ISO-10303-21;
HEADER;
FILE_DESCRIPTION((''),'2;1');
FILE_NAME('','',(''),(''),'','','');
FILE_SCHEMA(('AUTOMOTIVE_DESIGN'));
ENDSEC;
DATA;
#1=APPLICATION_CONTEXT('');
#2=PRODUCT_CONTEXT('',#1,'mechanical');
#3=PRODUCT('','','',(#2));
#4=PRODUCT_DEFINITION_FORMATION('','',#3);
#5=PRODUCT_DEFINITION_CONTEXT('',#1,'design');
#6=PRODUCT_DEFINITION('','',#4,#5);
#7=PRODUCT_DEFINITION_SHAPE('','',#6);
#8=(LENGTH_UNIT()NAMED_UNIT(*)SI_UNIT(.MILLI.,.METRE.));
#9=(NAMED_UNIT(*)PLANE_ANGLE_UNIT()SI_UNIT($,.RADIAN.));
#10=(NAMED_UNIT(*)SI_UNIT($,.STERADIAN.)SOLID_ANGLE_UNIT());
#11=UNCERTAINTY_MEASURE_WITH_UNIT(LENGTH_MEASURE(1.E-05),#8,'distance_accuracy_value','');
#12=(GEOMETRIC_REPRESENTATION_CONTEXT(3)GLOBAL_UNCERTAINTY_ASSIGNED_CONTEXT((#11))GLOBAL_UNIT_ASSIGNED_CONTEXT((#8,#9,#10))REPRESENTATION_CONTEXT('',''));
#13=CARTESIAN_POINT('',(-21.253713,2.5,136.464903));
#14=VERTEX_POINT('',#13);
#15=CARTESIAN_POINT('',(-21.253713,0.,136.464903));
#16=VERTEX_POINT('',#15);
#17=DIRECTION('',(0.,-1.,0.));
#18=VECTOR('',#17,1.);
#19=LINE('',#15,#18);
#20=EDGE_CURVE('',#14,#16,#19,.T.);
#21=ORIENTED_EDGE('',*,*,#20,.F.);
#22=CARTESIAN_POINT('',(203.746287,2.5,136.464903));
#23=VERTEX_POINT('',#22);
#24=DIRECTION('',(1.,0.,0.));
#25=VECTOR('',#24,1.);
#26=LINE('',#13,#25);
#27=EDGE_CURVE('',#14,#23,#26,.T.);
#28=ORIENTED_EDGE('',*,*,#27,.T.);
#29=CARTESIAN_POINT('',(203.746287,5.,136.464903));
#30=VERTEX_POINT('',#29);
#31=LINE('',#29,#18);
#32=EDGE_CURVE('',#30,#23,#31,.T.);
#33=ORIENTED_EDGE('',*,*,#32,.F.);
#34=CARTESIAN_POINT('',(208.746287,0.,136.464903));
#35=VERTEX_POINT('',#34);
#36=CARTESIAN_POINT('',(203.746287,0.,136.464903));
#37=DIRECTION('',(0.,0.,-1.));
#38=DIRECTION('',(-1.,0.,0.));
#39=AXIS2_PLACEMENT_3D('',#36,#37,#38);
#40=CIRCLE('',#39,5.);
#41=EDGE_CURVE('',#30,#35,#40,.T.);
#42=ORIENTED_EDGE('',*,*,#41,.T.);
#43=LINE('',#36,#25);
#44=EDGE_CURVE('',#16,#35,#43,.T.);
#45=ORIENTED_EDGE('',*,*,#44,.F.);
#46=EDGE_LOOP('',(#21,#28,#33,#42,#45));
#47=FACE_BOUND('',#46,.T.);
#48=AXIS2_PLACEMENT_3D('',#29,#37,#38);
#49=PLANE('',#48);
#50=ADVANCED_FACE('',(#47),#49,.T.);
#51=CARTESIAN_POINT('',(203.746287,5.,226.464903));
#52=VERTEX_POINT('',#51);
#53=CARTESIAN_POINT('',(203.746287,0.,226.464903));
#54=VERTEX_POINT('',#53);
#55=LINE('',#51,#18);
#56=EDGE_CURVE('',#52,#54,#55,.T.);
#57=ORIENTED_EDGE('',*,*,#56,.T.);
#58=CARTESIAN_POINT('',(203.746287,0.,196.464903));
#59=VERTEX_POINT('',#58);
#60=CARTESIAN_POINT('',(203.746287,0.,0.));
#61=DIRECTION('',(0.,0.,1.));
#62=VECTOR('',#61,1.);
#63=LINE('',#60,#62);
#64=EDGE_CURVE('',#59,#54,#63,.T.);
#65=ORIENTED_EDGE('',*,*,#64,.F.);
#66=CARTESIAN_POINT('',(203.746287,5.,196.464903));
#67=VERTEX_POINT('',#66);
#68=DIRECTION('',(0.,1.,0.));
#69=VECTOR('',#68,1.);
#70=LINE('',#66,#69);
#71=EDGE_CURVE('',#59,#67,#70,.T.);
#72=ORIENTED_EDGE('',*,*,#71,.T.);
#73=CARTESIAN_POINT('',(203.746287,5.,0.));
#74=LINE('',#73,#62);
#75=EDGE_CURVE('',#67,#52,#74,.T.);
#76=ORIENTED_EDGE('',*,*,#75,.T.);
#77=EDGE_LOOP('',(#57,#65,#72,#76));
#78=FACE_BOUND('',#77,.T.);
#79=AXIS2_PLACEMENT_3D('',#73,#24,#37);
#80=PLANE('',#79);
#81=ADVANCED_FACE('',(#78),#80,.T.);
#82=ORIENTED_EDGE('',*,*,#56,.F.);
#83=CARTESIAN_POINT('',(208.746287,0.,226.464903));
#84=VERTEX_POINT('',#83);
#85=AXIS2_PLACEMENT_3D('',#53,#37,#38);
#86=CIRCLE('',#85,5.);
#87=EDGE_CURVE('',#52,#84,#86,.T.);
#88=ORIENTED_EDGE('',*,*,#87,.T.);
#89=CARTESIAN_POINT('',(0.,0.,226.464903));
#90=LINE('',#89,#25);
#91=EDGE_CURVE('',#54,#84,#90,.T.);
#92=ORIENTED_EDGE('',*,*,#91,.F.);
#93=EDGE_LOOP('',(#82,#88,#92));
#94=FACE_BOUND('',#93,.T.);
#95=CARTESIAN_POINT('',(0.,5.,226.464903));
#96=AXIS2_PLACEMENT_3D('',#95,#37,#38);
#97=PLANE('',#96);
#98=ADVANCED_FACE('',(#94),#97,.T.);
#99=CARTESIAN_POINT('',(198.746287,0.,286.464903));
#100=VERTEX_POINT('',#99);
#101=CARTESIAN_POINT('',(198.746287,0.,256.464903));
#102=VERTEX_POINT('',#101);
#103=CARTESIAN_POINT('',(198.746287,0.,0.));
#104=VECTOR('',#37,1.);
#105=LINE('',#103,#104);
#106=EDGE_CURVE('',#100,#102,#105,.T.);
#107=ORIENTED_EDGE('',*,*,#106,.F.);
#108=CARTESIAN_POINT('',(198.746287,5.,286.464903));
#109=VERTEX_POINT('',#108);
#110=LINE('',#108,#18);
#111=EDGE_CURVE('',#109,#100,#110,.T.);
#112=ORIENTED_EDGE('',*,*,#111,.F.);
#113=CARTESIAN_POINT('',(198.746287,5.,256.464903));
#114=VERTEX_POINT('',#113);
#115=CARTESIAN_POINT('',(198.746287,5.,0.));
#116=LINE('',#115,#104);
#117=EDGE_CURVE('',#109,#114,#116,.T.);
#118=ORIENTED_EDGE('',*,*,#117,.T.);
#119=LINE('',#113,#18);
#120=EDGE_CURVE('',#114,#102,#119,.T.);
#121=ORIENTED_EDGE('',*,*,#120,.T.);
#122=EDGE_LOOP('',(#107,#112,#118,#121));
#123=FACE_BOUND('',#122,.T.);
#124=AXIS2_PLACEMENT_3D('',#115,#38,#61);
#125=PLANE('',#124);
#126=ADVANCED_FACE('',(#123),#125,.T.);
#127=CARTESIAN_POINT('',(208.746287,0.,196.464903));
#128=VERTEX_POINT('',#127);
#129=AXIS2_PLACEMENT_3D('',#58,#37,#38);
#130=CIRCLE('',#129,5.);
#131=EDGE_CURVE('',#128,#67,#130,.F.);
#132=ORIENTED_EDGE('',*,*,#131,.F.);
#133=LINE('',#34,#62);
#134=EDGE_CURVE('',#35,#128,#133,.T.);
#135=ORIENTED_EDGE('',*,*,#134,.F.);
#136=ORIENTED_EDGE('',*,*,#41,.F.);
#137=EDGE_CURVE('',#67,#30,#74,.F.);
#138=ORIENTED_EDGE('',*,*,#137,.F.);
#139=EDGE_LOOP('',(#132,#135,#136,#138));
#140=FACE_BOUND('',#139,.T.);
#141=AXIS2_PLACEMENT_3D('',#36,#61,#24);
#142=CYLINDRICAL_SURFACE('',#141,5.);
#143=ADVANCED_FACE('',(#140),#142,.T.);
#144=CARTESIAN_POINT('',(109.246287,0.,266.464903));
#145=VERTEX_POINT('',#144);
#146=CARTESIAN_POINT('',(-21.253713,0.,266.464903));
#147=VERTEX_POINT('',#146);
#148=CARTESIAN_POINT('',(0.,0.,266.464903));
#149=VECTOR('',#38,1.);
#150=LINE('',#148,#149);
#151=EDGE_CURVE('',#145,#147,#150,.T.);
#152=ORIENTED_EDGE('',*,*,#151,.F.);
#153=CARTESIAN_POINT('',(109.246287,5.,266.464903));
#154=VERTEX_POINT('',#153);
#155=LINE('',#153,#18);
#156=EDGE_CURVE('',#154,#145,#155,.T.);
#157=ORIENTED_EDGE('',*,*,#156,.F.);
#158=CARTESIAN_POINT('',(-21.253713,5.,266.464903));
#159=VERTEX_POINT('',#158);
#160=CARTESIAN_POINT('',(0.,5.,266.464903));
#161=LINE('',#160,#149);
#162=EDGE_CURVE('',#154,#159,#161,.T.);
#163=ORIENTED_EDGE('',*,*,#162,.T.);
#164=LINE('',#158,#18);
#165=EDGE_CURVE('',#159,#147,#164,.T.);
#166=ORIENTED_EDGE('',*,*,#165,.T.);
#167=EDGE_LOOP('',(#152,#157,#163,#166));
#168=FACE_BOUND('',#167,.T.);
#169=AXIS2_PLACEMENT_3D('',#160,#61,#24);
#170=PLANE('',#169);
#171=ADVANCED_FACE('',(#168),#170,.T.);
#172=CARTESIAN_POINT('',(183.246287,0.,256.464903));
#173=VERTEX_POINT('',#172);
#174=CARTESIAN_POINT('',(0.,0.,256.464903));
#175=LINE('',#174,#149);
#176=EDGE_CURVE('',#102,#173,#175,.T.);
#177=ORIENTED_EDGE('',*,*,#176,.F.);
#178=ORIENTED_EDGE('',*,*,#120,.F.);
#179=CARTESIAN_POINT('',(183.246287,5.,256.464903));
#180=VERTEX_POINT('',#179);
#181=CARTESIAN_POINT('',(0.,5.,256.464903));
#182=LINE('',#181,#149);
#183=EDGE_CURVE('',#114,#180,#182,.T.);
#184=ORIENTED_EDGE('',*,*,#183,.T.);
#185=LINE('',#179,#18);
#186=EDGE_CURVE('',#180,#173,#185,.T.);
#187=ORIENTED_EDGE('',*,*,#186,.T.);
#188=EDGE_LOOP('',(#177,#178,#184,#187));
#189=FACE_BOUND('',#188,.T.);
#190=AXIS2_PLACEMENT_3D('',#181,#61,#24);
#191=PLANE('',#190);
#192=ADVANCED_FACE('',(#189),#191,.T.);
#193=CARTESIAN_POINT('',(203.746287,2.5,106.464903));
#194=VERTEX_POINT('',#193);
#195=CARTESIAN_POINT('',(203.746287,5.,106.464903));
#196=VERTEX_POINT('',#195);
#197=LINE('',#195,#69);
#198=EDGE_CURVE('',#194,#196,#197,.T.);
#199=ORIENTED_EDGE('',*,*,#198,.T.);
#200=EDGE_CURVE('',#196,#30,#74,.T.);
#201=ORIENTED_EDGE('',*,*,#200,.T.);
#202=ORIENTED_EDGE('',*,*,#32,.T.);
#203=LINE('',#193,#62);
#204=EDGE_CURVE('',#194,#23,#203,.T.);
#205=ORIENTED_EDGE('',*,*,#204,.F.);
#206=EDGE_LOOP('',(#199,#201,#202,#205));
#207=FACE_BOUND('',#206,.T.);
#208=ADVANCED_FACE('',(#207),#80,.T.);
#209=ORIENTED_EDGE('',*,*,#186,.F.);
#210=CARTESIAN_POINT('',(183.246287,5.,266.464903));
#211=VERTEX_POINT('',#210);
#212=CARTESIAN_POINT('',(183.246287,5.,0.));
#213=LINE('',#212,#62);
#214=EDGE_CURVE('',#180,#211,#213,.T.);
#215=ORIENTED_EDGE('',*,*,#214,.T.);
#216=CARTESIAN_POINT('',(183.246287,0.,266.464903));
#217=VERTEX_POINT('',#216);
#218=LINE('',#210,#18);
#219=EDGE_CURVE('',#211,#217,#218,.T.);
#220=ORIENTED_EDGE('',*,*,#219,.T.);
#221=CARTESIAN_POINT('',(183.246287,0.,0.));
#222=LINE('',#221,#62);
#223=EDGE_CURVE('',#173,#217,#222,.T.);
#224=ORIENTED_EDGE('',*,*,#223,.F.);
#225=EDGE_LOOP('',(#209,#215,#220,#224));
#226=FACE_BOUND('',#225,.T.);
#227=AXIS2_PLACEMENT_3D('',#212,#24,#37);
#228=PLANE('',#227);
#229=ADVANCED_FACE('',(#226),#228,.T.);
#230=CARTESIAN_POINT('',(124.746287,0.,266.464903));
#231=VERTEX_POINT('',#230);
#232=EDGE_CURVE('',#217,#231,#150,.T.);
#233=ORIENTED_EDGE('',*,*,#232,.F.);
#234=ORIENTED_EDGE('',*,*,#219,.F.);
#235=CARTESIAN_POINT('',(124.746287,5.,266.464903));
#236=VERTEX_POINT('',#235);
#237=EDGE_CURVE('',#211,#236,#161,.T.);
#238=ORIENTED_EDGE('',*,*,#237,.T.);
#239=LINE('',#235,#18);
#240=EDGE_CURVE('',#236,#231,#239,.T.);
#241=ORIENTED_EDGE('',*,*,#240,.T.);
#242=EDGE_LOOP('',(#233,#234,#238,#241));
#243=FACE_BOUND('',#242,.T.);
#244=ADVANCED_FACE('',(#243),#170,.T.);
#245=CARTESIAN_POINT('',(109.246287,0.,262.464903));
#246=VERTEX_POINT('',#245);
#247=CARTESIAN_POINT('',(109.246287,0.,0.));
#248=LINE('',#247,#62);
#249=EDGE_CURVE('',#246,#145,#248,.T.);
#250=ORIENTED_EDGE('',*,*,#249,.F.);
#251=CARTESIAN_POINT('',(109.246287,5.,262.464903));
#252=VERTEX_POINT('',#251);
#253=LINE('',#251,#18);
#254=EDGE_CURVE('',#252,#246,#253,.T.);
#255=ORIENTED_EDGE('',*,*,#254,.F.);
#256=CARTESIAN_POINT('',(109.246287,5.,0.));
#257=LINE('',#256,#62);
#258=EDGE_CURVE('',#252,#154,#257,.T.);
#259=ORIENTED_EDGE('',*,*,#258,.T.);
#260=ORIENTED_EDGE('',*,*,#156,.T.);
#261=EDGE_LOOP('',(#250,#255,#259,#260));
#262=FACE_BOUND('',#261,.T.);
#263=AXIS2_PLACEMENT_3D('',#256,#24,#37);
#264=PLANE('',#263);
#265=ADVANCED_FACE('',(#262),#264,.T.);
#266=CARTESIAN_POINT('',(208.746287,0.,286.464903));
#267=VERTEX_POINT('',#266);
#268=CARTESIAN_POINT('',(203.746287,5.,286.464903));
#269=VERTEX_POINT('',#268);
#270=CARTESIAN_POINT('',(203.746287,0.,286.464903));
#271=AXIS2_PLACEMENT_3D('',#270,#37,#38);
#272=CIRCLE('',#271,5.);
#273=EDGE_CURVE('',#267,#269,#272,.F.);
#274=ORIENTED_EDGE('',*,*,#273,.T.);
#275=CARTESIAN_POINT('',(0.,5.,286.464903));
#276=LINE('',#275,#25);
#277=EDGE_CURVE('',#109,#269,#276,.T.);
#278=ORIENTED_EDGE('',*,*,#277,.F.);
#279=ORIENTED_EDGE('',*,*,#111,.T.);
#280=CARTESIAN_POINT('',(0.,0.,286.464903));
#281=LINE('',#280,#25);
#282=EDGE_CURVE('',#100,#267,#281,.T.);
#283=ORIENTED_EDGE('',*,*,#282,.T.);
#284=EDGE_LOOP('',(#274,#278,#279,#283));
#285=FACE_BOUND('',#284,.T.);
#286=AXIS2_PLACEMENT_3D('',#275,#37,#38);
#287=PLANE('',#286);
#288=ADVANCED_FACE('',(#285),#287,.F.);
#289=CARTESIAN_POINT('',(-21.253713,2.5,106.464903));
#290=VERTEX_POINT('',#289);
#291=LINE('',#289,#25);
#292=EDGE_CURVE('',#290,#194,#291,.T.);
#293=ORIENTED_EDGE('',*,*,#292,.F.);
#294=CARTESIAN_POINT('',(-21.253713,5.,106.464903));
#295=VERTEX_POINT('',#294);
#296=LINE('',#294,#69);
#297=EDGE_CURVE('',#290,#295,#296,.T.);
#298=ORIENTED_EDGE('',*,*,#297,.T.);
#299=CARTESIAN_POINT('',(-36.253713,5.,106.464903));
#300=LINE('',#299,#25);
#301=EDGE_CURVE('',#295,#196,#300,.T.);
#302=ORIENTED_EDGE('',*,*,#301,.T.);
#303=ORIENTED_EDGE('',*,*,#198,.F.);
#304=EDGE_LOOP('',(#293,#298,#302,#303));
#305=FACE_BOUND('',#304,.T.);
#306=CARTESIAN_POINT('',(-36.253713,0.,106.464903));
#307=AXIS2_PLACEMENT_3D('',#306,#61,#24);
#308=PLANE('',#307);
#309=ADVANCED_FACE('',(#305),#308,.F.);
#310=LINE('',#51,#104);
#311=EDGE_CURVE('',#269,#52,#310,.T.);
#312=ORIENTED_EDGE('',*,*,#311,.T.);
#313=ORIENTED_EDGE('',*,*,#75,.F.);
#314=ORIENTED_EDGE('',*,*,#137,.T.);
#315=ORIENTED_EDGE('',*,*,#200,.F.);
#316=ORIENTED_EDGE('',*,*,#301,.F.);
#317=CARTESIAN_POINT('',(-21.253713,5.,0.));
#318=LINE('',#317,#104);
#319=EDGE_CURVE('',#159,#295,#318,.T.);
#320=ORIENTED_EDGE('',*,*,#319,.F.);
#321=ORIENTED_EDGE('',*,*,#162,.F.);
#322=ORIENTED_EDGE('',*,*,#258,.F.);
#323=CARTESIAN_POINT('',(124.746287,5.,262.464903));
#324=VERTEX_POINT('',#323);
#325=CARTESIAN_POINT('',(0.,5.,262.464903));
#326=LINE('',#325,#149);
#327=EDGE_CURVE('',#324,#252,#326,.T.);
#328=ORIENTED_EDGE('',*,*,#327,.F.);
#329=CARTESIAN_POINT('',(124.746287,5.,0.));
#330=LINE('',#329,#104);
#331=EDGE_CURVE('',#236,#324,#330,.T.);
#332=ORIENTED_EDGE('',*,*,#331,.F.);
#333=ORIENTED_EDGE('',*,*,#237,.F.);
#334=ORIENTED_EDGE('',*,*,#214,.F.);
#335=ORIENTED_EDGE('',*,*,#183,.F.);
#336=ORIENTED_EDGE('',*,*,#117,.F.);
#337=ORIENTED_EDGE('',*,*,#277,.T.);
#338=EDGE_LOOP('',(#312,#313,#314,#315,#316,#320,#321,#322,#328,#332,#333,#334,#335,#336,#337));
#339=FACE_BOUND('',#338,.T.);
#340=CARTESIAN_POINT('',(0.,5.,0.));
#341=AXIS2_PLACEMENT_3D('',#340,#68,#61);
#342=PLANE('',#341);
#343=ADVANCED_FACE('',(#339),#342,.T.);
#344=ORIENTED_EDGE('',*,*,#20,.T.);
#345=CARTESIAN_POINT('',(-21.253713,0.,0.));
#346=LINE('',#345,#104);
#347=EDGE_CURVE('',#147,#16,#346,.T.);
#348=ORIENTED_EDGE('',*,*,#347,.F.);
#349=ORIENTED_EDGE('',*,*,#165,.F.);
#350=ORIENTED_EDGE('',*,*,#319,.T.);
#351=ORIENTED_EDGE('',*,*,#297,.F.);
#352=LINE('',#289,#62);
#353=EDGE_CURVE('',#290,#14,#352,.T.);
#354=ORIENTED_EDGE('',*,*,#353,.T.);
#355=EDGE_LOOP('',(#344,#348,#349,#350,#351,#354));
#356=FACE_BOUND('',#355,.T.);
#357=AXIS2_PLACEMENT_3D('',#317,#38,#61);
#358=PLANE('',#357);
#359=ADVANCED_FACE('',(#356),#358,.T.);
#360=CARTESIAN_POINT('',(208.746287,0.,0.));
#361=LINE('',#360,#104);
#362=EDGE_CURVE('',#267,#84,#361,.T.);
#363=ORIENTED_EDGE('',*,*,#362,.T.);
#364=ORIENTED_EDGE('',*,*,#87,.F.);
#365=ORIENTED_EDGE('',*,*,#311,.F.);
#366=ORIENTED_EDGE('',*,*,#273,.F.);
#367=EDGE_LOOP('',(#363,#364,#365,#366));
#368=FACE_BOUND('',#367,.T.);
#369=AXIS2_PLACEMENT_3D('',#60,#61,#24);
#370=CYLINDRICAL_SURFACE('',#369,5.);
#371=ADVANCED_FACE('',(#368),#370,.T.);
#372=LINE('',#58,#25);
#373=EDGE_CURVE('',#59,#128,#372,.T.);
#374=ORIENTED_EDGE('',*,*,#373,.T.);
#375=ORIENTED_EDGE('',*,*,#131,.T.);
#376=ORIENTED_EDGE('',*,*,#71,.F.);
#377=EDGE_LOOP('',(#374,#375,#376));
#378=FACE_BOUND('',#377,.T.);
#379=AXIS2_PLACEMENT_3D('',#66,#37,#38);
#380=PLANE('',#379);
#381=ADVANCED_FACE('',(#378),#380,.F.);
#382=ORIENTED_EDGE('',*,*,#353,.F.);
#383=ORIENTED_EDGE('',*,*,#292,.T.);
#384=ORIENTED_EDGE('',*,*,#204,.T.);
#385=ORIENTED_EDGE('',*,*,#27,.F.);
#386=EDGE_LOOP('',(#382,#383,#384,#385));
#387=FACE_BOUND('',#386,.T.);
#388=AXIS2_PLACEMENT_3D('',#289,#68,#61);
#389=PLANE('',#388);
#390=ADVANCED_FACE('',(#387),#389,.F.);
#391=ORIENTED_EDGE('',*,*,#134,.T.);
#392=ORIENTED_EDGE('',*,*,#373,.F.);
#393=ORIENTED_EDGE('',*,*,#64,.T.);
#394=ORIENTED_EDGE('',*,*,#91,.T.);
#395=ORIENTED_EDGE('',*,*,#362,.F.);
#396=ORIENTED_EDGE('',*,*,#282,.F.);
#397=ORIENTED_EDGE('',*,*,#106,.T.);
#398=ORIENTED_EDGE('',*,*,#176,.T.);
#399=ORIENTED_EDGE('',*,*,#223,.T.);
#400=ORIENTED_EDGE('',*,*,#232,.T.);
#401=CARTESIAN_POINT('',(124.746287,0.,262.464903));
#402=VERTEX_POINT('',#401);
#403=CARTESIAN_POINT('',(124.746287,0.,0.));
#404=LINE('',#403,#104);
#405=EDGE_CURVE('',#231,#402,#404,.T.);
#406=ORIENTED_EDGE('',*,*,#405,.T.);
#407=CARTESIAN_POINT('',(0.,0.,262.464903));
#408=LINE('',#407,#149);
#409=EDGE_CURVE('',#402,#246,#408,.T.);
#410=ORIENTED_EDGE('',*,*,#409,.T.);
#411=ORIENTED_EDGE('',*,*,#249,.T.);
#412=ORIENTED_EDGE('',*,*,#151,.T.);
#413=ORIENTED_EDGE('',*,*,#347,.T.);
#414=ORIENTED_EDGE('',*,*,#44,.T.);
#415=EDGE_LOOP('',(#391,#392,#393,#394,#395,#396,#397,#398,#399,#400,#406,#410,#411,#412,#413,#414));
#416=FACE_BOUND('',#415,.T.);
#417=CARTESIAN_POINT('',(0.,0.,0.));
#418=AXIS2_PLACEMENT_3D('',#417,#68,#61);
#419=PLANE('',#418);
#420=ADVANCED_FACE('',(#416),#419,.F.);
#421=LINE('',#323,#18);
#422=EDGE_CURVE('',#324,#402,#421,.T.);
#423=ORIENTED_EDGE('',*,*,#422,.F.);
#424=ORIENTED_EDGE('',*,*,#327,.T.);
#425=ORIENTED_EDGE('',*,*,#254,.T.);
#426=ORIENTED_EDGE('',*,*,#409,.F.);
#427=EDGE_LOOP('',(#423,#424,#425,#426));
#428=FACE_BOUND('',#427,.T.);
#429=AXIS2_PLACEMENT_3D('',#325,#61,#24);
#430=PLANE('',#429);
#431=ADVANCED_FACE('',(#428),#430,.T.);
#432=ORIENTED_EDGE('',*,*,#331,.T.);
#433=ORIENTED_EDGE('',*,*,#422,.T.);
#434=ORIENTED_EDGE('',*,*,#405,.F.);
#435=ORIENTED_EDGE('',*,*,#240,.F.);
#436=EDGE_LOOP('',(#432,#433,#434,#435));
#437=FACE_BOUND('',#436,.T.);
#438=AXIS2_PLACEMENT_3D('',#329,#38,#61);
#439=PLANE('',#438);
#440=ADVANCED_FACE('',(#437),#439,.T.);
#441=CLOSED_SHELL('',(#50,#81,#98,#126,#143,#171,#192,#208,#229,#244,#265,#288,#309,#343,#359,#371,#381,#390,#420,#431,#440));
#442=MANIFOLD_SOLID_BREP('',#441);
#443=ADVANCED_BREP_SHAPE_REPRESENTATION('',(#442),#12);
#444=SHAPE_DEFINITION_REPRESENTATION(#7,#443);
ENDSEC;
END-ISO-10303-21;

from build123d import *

# Parameters (mm, degrees)
SKETCH_1_W          = 5
SKETCH_1_H          = 60
SKETCH_1_W_2        = 30
SKETCH_1_H_2        = 5
SKETCH_1_W_3        = 15
EXTRUDE_1_DEPTH     = 5
FILLET_1_R          = 5
SKETCH_2_W          = 245
SKETCH_2_H          = 155
CUT_EXTRUDE_1_DEPTH = 5
SKETCH_3_W          = 30
SKETCH_3_H          = 2.5
CUT_EXTRUDE_2_DEPTH = 365.296775248


with BuildPart() as part:
    # 草圖1 → 填料-伸長1 (new body)
    with BuildSketch(Plane(origin=(0, 0, 0), x_dir=(1, 0, 0), z_dir=(0, 1, 0))):
        Polygon((198.746286718, -286.464902661), (198.746286718, -256.464902661), (183.246286718, -256.464902661), (183.246286718, -266.464902661), (124.746286718, -266.464902661), (124.746286718, -262.464902661), (109.246286718, -262.464902661), (109.246286718, -266.464902661), (-21.253713282, -266.464902661), (-21.253713282, 38.535097339), (-36.253713282, 38.535097339), (-36.253713282, 43.535097339), (203.746286718, 43.535097339), (203.746286718, -286.464902661), align=None)
        with Locations((206.246286718, -256.464902661)):
            Rectangle(SKETCH_1_W, SKETCH_1_H)
        with Locations((206.246286718, 13.535097339)):
            Rectangle(SKETCH_1_W, SKETCH_1_H)
        with Locations((188.746286718, 46.035097339)):
            Rectangle(SKETCH_1_W_2, SKETCH_1_H_2)
        with Locations((-21.253713282, 46.035097339)):
            Rectangle(SKETCH_1_W_2, SKETCH_1_H_2)
        with Locations((91.246286718, 46.035097339)):
            Rectangle(SKETCH_1_W_3, SKETCH_1_H_2)
        with Locations((76.246286718, 46.035097339)):
            Rectangle(SKETCH_1_W_3, SKETCH_1_H_2)
        with Locations((206.246286718, -166.464902661)):
            Rectangle(SKETCH_1_W, SKETCH_1_H)
        with Locations((206.246286718, -76.464902661)):
            Rectangle(SKETCH_1_W, SKETCH_1_H)
    extrude(amount=EXTRUDE_1_DEPTH)

    # 圓角1
    fillet_1_edges = [part.edges().sort_by_distance(p)[0] for p in [
        (208.746286718, 5, -13.535097339),
        (208.746286718, 5, 76.464902661),
        (208.746286718, 5, 166.464902661),
        (208.746286718, 5, 256.464902661),
    ]]
    fillet(fillet_1_edges, radius=FILLET_1_R - 0.0001)  # a hair under: the kernel refuses the full size

    # 草圖2 → 除料-伸長1 (cut)
    with BuildSketch(Plane(origin=(0, 5, 0), x_dir=(1, 0, 0), z_dir=(0, 1, 0))):
        with Locations((86.246286718, -28.964902661)):
            Rectangle(SKETCH_2_W, SKETCH_2_H)
    extrude(amount=-CUT_EXTRUDE_1_DEPTH, mode=Mode.SUBTRACT)

    # 草圖3 → 除料-伸長2 (cut, through all)
    with BuildSketch(Plane(origin=(203.746286718, 0, 0), x_dir=(0, 0, -1), z_dir=(1, 0, 0))):
        with Locations((-121.464902661, 1.25)):
            Rectangle(SKETCH_3_W, SKETCH_3_H)
    extrude(amount=-CUT_EXTRUDE_2_DEPTH, mode=Mode.SUBTRACT)


solid = part.part
